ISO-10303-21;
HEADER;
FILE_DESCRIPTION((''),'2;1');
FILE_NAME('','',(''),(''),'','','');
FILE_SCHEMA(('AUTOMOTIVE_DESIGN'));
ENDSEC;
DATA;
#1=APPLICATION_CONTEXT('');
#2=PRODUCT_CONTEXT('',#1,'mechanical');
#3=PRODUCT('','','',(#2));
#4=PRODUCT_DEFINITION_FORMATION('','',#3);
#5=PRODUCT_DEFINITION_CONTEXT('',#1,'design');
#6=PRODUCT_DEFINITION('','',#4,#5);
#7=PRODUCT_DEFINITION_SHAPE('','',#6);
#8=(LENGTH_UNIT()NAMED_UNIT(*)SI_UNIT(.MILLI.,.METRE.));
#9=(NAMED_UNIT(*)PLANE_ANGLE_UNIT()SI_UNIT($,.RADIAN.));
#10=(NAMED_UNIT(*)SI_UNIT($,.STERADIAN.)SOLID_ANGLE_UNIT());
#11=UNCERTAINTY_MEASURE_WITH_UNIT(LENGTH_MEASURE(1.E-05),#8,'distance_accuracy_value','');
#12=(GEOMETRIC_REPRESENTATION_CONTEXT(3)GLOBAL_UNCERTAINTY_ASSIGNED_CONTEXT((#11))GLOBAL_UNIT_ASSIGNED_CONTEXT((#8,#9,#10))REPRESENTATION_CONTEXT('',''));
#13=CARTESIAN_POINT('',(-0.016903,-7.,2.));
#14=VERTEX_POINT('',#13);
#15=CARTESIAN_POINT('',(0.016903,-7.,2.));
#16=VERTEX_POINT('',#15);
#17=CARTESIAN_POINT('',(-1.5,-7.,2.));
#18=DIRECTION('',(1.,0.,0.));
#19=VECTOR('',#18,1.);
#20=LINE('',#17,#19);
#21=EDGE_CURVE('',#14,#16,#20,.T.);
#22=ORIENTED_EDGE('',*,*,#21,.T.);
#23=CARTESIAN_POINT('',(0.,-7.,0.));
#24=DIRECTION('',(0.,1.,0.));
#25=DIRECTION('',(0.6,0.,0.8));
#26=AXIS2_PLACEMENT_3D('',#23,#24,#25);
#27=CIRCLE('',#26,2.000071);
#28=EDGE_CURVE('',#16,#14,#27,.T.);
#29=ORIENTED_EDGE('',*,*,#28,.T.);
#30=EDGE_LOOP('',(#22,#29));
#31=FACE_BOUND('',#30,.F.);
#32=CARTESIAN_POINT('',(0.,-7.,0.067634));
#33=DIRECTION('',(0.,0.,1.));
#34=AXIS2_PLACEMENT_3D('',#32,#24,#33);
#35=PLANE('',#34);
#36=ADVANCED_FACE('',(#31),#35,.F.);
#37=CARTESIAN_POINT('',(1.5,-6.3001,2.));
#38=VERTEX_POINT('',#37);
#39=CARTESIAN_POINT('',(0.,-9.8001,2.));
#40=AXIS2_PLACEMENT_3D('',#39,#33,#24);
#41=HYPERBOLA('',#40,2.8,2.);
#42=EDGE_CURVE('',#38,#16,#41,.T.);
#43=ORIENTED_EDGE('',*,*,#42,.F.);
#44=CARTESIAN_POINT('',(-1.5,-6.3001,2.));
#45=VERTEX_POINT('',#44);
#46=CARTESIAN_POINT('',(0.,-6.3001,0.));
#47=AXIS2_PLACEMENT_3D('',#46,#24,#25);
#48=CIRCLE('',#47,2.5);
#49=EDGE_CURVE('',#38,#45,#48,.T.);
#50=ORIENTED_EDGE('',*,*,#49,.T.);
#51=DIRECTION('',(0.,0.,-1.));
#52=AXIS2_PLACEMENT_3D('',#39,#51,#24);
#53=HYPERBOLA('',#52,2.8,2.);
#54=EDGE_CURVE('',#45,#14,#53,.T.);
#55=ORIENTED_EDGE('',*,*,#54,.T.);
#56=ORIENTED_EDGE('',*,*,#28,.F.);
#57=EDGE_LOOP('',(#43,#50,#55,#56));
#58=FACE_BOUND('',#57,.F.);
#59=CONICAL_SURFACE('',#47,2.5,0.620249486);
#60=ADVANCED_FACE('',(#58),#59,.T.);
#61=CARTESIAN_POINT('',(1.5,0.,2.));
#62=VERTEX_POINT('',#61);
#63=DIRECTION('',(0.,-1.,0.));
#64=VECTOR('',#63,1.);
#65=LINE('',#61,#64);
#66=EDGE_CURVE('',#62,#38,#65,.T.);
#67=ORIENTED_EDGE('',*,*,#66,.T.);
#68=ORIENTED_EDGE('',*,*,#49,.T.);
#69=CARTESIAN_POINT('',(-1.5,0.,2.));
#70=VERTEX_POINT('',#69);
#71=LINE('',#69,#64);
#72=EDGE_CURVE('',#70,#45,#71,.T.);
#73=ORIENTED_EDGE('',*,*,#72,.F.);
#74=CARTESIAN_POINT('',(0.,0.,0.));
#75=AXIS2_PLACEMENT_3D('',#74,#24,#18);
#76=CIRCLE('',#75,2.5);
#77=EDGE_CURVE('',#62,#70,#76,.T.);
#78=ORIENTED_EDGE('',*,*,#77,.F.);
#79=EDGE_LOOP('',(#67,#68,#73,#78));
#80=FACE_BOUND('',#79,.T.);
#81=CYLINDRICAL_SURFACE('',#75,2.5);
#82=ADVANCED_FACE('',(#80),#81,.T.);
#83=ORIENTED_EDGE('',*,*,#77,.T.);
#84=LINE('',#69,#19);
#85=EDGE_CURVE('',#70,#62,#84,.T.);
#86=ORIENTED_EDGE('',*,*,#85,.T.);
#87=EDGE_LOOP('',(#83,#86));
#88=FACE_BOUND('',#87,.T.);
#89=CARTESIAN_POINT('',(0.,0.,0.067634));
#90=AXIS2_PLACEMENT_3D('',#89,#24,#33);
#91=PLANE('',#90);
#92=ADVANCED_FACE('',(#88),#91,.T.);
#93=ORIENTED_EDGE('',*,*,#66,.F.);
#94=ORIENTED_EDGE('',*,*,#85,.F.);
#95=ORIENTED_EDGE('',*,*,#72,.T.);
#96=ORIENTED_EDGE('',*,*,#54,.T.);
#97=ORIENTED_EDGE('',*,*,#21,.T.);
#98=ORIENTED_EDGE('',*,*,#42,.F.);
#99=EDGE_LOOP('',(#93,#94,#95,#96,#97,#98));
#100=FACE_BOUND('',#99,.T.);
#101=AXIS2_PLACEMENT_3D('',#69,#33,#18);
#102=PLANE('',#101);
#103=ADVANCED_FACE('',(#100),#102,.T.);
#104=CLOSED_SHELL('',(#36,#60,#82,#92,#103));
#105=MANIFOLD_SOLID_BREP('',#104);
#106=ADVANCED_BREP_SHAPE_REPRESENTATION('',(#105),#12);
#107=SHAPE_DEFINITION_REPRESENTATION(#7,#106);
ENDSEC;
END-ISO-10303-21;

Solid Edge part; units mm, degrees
sketch "Sketch1" plane through (0, 0, 0) normal (0, -1, 0) x (1, 0, 0)
  line L0 (-1.5, 2) -> (1.5, 2)
  arc A0 (1.5, 2) -> (-1.5, 2) centre (0, 0) cw
extrude "Protrusion1" add sketch "Sketch1" along normal blind 7
chamfer "Fase_2" distance 0.5 distance2 0.7 1 edges at (0, -7, -2.5) measured on face at (-1.6167, -7, -1.795)
